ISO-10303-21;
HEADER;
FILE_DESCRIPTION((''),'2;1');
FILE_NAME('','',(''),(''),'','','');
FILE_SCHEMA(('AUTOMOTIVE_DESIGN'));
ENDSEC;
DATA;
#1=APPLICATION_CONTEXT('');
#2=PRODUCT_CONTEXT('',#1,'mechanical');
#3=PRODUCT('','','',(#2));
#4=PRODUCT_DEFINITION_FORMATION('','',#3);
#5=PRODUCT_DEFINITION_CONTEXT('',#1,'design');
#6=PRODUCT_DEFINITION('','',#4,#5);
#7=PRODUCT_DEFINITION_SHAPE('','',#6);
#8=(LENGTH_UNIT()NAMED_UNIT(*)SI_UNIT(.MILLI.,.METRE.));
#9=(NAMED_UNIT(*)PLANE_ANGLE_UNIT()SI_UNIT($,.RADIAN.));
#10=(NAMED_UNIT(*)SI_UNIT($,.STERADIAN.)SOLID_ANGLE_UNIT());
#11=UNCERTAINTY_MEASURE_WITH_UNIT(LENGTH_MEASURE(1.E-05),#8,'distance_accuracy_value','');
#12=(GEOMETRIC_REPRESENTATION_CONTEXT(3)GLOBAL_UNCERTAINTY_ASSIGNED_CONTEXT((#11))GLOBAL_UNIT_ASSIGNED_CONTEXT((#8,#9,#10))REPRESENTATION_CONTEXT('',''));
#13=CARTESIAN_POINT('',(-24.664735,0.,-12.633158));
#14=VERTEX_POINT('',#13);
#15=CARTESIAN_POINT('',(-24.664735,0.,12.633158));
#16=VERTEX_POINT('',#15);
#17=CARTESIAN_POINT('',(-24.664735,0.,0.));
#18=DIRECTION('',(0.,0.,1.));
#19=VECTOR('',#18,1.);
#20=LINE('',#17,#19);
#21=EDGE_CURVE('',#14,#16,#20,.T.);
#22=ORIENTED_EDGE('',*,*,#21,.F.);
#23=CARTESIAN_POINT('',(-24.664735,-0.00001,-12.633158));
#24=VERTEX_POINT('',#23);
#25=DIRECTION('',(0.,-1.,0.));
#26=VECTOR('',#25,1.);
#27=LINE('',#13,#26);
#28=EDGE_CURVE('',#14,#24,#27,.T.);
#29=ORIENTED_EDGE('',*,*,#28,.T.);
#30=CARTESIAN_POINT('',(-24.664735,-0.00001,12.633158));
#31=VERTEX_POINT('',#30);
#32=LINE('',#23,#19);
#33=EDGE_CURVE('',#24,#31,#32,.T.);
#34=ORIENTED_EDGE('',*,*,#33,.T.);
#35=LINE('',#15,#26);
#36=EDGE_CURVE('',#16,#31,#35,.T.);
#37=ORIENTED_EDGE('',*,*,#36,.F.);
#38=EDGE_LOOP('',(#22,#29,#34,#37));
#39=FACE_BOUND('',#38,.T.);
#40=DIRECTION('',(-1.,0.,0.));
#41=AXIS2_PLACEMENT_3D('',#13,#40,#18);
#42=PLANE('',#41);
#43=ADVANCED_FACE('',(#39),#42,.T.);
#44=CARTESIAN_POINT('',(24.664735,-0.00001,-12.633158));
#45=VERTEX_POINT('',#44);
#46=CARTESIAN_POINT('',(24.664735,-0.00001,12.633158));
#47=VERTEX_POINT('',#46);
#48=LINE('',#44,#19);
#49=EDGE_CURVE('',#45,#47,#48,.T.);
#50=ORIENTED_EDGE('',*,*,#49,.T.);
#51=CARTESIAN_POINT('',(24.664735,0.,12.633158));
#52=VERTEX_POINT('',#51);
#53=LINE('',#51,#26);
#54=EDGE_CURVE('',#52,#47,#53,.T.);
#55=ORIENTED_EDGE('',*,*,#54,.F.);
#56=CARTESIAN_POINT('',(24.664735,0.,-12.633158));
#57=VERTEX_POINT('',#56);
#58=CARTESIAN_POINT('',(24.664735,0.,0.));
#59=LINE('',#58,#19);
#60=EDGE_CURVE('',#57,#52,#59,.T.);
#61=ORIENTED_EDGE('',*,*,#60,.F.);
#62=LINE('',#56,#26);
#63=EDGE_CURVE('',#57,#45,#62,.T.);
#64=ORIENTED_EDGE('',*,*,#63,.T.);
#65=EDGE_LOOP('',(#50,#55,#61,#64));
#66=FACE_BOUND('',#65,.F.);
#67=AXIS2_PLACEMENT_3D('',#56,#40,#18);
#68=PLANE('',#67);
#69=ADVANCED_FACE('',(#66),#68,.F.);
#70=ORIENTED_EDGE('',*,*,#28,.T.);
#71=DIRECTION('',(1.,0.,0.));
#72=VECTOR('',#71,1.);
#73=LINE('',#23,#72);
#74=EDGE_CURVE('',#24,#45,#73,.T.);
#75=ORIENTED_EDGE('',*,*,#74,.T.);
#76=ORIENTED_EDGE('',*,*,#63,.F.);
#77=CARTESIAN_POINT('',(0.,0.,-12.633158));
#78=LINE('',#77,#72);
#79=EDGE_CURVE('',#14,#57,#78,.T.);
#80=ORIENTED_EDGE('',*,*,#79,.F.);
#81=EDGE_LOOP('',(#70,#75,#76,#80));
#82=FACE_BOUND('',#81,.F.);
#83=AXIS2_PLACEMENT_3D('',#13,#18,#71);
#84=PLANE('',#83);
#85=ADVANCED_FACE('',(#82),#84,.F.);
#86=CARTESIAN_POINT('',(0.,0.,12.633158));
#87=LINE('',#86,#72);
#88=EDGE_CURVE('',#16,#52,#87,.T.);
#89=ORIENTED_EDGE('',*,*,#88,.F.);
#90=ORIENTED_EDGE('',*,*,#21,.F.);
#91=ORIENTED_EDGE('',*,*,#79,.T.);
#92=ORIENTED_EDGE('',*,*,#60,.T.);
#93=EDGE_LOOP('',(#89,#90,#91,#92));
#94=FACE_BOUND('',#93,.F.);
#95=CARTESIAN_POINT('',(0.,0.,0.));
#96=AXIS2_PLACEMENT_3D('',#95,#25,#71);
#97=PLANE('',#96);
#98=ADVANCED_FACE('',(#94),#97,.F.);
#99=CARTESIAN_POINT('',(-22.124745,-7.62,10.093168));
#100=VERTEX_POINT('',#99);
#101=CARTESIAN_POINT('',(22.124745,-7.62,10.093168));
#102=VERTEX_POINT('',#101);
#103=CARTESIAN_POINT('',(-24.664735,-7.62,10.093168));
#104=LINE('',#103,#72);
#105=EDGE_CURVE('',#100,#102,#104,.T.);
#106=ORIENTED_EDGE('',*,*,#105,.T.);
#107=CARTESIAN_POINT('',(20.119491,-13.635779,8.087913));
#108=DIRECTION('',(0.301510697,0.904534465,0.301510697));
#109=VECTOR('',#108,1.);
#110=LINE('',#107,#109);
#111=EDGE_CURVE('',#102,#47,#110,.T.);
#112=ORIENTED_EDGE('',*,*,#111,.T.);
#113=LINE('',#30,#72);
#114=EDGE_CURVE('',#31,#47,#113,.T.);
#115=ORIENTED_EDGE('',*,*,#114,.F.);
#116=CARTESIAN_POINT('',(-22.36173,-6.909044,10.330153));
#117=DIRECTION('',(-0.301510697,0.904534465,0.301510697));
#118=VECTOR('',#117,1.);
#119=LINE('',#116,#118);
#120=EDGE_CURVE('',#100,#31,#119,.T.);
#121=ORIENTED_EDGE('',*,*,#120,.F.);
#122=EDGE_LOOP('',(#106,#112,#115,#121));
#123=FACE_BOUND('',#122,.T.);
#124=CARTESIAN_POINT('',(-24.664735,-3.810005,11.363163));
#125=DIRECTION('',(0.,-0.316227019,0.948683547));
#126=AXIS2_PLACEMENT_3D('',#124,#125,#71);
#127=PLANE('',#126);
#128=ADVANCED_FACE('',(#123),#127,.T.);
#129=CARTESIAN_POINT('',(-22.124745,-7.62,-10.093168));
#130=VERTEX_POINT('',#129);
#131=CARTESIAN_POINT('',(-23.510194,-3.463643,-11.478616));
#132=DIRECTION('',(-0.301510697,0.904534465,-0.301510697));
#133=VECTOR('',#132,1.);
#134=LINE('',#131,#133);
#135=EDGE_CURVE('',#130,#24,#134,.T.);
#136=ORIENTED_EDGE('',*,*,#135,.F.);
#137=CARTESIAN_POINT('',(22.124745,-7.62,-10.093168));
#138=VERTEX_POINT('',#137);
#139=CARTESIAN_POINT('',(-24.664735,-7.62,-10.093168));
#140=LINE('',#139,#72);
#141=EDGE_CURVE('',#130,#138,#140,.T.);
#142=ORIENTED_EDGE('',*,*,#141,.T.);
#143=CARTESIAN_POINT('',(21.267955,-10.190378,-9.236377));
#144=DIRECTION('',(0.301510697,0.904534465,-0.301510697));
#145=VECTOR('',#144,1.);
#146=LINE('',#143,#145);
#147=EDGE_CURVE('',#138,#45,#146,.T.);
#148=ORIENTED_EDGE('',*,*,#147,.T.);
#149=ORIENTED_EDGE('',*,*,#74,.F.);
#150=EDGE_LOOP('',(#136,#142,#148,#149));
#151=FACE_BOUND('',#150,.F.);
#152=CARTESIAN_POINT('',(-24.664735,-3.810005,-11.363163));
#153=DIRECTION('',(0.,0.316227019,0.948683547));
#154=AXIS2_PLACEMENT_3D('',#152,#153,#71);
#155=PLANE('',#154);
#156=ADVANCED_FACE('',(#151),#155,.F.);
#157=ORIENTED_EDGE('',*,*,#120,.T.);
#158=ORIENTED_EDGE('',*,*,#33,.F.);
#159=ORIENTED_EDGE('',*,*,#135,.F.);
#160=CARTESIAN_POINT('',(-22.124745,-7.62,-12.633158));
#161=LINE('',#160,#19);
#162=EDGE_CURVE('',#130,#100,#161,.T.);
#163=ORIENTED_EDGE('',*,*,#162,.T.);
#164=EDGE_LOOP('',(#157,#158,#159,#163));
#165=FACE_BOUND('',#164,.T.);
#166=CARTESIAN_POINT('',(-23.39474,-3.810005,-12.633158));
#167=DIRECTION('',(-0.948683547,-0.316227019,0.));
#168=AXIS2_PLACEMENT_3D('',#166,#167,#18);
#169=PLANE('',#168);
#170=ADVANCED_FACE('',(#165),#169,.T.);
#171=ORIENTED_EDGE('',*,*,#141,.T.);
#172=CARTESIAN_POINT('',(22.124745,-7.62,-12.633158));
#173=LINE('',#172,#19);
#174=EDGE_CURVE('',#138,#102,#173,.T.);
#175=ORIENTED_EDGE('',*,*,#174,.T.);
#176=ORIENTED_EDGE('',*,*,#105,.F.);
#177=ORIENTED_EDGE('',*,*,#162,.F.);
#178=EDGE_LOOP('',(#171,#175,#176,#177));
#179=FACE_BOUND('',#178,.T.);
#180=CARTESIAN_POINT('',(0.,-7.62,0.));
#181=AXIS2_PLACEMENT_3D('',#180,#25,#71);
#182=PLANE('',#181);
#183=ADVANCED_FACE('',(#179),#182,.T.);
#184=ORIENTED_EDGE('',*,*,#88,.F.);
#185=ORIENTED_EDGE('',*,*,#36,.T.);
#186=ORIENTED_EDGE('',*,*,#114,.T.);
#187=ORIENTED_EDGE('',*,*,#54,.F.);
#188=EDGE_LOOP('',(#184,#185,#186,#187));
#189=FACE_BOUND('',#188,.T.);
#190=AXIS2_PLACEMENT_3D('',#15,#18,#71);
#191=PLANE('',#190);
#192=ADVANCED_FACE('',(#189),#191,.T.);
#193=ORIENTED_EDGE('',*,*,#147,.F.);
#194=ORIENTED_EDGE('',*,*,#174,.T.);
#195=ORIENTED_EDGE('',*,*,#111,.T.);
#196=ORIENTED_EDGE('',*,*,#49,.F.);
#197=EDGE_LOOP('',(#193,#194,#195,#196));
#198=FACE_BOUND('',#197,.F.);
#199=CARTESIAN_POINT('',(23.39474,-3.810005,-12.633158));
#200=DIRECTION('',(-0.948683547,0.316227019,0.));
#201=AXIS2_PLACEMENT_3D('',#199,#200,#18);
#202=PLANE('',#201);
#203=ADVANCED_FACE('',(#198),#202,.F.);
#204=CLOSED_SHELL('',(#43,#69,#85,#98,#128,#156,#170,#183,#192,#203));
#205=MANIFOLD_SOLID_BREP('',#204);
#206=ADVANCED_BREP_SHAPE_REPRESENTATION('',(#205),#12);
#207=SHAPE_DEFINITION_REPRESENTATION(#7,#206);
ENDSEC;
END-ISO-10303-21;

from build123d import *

# Parameters (mm, degrees)
F0_W     = 49.3294708431
F0_H     = 25.266315788
F1_DEPTH = 7.62
F2_SIZE2 = 7.61999
F2_SIZE  = 2.53999


# Not quite as in the source:
# - a fillet or chamfer is up to 0.001 mm smaller than in the source, because OpenCascade refuses the exact size


with BuildPart() as f1:
    # F0 (on Front) → F1 (new body)
    with BuildSketch(Plane.XZ):
        Rectangle(F0_W, F0_H)
    extrude(amount=F1_DEPTH)

    # F2 (size 2.54 and 7.62 in the source; OpenCascade refuses exactly that, so slightly less here)
    f2_edges = [f1.edges().sort_by_distance(p)[0] for p in [
        (0, -7.62, 12.633158),
        (24.664735, -7.62, 0),
        (-24.664735, -7.62, 0),
        (0, -7.62, -12.633158),
    ]]
    f2_side = f1.faces().sort_by_distance((0, -7.62, 0))[0]
    chamfer(f2_edges, length=F2_SIZE, length2=F2_SIZE2, reference=f2_side)


solid = f1.part
